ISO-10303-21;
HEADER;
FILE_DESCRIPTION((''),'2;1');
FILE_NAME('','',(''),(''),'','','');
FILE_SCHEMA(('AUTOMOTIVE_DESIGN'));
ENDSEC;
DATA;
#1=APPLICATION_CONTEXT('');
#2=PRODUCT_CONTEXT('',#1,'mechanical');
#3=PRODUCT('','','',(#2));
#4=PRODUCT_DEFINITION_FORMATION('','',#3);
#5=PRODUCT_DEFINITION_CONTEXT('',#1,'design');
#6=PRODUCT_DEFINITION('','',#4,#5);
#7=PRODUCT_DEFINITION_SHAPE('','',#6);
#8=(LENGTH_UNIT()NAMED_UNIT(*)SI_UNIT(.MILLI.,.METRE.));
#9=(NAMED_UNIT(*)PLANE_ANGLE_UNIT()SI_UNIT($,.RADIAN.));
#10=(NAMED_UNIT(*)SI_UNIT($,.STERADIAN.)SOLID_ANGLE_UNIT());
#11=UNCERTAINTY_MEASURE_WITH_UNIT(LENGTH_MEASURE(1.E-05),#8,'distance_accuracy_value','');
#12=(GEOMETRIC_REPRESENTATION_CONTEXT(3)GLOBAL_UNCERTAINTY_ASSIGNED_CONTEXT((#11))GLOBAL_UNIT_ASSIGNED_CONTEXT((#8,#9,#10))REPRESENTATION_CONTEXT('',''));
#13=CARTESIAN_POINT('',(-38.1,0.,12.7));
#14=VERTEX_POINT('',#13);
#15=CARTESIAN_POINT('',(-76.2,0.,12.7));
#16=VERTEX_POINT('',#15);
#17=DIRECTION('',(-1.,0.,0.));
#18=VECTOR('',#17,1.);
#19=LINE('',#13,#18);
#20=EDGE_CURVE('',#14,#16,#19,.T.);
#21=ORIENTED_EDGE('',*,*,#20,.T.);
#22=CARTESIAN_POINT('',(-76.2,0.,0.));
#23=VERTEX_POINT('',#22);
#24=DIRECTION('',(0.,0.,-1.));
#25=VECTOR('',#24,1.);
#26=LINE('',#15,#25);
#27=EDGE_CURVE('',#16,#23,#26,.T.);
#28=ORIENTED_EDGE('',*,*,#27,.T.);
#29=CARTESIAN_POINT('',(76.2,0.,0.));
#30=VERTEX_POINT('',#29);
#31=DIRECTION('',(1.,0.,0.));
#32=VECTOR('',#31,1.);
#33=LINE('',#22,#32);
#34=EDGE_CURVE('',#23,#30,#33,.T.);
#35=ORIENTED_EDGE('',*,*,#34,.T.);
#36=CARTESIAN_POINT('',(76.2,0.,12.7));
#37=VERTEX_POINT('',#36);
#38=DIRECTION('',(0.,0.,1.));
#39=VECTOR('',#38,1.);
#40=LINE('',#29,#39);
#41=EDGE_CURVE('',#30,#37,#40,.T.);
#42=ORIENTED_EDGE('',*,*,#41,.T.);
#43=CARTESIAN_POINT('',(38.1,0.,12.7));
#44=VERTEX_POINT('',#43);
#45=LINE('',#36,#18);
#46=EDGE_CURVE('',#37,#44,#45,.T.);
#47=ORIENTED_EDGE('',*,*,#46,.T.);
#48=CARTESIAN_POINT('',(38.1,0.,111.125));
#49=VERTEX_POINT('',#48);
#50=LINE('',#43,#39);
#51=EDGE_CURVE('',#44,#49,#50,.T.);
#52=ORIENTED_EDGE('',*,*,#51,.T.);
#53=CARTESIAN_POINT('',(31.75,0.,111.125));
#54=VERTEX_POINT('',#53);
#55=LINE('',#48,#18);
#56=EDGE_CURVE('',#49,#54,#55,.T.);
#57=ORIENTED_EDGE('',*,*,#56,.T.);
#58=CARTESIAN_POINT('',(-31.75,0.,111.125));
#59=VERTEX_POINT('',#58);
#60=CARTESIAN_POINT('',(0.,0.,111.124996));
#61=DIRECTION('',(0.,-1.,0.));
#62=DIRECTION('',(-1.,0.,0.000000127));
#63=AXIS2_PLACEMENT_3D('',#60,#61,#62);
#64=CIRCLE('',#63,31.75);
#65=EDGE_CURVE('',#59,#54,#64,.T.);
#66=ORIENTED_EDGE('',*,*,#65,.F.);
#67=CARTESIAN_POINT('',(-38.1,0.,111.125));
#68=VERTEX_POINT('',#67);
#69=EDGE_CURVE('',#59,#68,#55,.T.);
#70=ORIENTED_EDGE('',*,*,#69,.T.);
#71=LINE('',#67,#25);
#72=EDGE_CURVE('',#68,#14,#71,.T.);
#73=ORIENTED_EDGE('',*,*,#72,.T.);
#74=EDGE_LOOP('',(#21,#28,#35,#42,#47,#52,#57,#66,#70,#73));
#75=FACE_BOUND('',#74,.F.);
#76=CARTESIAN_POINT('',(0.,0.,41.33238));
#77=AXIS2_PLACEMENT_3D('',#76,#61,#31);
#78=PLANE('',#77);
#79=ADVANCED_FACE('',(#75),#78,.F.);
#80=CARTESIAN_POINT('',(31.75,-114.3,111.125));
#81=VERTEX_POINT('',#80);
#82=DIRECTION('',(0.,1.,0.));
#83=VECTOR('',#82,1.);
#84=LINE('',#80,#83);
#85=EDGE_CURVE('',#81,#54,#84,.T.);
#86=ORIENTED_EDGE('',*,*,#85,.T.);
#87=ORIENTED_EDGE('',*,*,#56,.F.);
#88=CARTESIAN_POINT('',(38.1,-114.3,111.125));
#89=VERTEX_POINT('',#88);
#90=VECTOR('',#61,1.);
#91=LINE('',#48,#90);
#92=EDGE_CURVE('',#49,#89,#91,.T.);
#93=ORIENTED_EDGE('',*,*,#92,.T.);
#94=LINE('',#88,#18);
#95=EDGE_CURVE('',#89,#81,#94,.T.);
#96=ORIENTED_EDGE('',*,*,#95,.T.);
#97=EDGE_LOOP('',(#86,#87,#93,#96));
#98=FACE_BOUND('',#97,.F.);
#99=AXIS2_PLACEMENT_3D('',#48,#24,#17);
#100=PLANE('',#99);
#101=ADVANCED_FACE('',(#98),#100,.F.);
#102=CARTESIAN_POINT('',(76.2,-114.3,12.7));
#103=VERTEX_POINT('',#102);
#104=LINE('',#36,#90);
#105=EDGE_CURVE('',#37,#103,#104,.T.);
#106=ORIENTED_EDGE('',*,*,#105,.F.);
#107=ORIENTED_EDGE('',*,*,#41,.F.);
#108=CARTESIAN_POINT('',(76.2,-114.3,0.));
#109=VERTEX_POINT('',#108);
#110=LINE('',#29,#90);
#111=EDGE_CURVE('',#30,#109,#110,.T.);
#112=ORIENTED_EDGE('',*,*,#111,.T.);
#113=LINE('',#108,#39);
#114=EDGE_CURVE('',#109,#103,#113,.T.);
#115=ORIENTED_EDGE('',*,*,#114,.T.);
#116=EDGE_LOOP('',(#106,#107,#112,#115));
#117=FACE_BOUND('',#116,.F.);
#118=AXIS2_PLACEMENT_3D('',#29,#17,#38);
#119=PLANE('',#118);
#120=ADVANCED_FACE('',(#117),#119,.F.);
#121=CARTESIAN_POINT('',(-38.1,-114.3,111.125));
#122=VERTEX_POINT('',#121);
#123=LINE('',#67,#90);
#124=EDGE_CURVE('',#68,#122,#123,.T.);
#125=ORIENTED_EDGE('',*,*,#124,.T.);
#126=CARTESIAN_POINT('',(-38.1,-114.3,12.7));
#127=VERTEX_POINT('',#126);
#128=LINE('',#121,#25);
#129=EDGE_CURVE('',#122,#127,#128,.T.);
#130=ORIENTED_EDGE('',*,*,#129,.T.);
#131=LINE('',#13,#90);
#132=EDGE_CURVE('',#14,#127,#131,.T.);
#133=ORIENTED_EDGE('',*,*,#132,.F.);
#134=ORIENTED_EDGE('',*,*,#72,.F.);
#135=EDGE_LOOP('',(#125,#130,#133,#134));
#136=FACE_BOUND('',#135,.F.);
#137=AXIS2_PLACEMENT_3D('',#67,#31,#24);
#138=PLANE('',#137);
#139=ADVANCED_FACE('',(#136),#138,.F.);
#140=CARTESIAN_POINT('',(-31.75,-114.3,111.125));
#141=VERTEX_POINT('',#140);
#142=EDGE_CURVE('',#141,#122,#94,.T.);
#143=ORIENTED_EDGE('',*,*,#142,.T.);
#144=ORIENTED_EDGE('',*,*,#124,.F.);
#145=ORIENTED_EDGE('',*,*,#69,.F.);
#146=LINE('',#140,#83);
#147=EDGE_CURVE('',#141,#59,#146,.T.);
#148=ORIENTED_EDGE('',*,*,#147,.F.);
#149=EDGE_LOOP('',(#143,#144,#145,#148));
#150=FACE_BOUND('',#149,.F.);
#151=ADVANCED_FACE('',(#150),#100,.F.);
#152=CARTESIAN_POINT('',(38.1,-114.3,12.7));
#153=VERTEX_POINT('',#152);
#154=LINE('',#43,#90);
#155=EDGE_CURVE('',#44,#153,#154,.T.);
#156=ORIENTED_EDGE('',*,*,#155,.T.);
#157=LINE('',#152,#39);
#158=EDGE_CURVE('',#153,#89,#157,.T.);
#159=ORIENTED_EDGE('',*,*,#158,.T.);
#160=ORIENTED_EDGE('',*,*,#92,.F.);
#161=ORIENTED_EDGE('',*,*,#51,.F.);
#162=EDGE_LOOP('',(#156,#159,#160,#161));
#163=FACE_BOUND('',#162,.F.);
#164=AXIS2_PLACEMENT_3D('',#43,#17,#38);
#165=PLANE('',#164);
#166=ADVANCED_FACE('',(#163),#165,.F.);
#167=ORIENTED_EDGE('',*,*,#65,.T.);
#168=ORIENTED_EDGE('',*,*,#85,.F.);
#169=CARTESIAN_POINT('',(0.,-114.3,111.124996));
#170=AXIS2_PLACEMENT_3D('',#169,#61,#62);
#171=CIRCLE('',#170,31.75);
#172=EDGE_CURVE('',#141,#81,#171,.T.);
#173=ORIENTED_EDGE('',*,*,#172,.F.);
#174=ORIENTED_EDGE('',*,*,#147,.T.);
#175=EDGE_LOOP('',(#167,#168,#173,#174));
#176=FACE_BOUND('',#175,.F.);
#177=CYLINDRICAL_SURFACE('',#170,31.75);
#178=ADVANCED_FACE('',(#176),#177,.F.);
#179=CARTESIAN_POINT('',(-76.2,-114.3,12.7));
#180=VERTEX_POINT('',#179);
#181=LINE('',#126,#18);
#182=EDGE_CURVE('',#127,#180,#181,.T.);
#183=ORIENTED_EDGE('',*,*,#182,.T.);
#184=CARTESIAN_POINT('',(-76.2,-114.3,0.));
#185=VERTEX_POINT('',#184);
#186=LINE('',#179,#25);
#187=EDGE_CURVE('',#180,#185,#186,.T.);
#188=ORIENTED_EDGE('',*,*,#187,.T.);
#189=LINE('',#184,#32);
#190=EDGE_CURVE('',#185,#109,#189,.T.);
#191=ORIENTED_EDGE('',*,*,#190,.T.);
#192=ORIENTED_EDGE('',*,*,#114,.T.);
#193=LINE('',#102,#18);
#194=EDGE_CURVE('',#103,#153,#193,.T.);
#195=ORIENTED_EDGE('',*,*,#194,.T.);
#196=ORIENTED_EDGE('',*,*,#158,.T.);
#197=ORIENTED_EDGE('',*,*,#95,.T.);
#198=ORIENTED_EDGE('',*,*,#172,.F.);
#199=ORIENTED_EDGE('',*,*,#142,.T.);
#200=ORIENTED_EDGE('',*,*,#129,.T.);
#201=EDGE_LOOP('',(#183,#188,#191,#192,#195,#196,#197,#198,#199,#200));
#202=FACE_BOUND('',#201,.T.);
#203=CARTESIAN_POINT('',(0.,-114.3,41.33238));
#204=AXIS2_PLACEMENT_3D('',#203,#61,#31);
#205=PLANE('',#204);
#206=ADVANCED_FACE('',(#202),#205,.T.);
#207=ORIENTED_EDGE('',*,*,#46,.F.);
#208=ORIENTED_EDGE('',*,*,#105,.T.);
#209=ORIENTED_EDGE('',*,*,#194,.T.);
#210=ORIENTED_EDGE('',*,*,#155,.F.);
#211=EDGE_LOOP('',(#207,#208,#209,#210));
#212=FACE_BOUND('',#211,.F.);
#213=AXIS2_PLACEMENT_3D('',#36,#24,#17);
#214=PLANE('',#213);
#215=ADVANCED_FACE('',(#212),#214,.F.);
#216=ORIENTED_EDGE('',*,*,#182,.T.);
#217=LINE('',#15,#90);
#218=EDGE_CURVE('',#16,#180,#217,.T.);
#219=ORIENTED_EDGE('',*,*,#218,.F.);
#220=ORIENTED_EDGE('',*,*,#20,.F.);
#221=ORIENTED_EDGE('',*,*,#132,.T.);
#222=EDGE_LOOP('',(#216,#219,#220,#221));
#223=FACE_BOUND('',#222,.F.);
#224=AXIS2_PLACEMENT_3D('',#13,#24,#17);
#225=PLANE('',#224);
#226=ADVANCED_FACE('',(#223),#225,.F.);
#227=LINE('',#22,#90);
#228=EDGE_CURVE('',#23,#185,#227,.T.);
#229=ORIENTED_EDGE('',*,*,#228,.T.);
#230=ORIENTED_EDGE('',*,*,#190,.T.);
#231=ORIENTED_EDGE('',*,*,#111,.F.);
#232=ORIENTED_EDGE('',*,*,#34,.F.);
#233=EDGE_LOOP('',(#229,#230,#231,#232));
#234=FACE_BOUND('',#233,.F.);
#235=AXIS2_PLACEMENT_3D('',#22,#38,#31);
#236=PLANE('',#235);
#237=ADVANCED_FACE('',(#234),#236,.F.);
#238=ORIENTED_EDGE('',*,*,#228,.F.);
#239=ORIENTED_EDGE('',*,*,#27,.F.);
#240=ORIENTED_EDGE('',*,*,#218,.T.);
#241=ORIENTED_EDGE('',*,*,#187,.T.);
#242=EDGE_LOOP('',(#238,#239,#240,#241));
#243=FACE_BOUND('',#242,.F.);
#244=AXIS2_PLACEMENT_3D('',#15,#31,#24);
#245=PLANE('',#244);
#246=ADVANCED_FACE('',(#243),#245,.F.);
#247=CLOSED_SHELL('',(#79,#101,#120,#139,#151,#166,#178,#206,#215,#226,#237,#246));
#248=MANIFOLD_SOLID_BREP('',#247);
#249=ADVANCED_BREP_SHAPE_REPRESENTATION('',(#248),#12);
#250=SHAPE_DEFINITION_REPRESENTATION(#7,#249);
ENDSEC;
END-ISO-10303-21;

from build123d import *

# Parameters (mm, degrees)
F1_DEPTH = 114.3
F3_DEPTH = 114.301


# Not quite as in the source:
# - ends of sketch curves that miss each other by under 0.0002 mm in the source are joined


with BuildPart() as f1:
    # F0 (on Front) → F1 (new body)
    with BuildSketch(Plane.XZ):
        Polygon((-76.2, 0), (0, 0), (76.2, 0), (76.2, 12.7), (38.1, 12.7), (38.1, 111.125), (-38.1, 111.125), (-38.1, 12.7), (-76.2, 12.7), align=None)
    extrude(amount=F1_DEPTH)

    # F2 (on face) → F3 (cut, through all)
    with BuildSketch(Plane.XZ.offset(114.3)):
        with BuildLine():
            Line((0, 111.125), (-31.75, 111.125))
            ThreePointArc((-31.75, 111.125), (2.0181e-06, 79.3749959638), (31.75, 111.125))
            Line((31.75, 111.125), (0, 111.125))
        make_face()
    extrude(amount=-F3_DEPTH, mode=Mode.SUBTRACT)


solid = f1.part
